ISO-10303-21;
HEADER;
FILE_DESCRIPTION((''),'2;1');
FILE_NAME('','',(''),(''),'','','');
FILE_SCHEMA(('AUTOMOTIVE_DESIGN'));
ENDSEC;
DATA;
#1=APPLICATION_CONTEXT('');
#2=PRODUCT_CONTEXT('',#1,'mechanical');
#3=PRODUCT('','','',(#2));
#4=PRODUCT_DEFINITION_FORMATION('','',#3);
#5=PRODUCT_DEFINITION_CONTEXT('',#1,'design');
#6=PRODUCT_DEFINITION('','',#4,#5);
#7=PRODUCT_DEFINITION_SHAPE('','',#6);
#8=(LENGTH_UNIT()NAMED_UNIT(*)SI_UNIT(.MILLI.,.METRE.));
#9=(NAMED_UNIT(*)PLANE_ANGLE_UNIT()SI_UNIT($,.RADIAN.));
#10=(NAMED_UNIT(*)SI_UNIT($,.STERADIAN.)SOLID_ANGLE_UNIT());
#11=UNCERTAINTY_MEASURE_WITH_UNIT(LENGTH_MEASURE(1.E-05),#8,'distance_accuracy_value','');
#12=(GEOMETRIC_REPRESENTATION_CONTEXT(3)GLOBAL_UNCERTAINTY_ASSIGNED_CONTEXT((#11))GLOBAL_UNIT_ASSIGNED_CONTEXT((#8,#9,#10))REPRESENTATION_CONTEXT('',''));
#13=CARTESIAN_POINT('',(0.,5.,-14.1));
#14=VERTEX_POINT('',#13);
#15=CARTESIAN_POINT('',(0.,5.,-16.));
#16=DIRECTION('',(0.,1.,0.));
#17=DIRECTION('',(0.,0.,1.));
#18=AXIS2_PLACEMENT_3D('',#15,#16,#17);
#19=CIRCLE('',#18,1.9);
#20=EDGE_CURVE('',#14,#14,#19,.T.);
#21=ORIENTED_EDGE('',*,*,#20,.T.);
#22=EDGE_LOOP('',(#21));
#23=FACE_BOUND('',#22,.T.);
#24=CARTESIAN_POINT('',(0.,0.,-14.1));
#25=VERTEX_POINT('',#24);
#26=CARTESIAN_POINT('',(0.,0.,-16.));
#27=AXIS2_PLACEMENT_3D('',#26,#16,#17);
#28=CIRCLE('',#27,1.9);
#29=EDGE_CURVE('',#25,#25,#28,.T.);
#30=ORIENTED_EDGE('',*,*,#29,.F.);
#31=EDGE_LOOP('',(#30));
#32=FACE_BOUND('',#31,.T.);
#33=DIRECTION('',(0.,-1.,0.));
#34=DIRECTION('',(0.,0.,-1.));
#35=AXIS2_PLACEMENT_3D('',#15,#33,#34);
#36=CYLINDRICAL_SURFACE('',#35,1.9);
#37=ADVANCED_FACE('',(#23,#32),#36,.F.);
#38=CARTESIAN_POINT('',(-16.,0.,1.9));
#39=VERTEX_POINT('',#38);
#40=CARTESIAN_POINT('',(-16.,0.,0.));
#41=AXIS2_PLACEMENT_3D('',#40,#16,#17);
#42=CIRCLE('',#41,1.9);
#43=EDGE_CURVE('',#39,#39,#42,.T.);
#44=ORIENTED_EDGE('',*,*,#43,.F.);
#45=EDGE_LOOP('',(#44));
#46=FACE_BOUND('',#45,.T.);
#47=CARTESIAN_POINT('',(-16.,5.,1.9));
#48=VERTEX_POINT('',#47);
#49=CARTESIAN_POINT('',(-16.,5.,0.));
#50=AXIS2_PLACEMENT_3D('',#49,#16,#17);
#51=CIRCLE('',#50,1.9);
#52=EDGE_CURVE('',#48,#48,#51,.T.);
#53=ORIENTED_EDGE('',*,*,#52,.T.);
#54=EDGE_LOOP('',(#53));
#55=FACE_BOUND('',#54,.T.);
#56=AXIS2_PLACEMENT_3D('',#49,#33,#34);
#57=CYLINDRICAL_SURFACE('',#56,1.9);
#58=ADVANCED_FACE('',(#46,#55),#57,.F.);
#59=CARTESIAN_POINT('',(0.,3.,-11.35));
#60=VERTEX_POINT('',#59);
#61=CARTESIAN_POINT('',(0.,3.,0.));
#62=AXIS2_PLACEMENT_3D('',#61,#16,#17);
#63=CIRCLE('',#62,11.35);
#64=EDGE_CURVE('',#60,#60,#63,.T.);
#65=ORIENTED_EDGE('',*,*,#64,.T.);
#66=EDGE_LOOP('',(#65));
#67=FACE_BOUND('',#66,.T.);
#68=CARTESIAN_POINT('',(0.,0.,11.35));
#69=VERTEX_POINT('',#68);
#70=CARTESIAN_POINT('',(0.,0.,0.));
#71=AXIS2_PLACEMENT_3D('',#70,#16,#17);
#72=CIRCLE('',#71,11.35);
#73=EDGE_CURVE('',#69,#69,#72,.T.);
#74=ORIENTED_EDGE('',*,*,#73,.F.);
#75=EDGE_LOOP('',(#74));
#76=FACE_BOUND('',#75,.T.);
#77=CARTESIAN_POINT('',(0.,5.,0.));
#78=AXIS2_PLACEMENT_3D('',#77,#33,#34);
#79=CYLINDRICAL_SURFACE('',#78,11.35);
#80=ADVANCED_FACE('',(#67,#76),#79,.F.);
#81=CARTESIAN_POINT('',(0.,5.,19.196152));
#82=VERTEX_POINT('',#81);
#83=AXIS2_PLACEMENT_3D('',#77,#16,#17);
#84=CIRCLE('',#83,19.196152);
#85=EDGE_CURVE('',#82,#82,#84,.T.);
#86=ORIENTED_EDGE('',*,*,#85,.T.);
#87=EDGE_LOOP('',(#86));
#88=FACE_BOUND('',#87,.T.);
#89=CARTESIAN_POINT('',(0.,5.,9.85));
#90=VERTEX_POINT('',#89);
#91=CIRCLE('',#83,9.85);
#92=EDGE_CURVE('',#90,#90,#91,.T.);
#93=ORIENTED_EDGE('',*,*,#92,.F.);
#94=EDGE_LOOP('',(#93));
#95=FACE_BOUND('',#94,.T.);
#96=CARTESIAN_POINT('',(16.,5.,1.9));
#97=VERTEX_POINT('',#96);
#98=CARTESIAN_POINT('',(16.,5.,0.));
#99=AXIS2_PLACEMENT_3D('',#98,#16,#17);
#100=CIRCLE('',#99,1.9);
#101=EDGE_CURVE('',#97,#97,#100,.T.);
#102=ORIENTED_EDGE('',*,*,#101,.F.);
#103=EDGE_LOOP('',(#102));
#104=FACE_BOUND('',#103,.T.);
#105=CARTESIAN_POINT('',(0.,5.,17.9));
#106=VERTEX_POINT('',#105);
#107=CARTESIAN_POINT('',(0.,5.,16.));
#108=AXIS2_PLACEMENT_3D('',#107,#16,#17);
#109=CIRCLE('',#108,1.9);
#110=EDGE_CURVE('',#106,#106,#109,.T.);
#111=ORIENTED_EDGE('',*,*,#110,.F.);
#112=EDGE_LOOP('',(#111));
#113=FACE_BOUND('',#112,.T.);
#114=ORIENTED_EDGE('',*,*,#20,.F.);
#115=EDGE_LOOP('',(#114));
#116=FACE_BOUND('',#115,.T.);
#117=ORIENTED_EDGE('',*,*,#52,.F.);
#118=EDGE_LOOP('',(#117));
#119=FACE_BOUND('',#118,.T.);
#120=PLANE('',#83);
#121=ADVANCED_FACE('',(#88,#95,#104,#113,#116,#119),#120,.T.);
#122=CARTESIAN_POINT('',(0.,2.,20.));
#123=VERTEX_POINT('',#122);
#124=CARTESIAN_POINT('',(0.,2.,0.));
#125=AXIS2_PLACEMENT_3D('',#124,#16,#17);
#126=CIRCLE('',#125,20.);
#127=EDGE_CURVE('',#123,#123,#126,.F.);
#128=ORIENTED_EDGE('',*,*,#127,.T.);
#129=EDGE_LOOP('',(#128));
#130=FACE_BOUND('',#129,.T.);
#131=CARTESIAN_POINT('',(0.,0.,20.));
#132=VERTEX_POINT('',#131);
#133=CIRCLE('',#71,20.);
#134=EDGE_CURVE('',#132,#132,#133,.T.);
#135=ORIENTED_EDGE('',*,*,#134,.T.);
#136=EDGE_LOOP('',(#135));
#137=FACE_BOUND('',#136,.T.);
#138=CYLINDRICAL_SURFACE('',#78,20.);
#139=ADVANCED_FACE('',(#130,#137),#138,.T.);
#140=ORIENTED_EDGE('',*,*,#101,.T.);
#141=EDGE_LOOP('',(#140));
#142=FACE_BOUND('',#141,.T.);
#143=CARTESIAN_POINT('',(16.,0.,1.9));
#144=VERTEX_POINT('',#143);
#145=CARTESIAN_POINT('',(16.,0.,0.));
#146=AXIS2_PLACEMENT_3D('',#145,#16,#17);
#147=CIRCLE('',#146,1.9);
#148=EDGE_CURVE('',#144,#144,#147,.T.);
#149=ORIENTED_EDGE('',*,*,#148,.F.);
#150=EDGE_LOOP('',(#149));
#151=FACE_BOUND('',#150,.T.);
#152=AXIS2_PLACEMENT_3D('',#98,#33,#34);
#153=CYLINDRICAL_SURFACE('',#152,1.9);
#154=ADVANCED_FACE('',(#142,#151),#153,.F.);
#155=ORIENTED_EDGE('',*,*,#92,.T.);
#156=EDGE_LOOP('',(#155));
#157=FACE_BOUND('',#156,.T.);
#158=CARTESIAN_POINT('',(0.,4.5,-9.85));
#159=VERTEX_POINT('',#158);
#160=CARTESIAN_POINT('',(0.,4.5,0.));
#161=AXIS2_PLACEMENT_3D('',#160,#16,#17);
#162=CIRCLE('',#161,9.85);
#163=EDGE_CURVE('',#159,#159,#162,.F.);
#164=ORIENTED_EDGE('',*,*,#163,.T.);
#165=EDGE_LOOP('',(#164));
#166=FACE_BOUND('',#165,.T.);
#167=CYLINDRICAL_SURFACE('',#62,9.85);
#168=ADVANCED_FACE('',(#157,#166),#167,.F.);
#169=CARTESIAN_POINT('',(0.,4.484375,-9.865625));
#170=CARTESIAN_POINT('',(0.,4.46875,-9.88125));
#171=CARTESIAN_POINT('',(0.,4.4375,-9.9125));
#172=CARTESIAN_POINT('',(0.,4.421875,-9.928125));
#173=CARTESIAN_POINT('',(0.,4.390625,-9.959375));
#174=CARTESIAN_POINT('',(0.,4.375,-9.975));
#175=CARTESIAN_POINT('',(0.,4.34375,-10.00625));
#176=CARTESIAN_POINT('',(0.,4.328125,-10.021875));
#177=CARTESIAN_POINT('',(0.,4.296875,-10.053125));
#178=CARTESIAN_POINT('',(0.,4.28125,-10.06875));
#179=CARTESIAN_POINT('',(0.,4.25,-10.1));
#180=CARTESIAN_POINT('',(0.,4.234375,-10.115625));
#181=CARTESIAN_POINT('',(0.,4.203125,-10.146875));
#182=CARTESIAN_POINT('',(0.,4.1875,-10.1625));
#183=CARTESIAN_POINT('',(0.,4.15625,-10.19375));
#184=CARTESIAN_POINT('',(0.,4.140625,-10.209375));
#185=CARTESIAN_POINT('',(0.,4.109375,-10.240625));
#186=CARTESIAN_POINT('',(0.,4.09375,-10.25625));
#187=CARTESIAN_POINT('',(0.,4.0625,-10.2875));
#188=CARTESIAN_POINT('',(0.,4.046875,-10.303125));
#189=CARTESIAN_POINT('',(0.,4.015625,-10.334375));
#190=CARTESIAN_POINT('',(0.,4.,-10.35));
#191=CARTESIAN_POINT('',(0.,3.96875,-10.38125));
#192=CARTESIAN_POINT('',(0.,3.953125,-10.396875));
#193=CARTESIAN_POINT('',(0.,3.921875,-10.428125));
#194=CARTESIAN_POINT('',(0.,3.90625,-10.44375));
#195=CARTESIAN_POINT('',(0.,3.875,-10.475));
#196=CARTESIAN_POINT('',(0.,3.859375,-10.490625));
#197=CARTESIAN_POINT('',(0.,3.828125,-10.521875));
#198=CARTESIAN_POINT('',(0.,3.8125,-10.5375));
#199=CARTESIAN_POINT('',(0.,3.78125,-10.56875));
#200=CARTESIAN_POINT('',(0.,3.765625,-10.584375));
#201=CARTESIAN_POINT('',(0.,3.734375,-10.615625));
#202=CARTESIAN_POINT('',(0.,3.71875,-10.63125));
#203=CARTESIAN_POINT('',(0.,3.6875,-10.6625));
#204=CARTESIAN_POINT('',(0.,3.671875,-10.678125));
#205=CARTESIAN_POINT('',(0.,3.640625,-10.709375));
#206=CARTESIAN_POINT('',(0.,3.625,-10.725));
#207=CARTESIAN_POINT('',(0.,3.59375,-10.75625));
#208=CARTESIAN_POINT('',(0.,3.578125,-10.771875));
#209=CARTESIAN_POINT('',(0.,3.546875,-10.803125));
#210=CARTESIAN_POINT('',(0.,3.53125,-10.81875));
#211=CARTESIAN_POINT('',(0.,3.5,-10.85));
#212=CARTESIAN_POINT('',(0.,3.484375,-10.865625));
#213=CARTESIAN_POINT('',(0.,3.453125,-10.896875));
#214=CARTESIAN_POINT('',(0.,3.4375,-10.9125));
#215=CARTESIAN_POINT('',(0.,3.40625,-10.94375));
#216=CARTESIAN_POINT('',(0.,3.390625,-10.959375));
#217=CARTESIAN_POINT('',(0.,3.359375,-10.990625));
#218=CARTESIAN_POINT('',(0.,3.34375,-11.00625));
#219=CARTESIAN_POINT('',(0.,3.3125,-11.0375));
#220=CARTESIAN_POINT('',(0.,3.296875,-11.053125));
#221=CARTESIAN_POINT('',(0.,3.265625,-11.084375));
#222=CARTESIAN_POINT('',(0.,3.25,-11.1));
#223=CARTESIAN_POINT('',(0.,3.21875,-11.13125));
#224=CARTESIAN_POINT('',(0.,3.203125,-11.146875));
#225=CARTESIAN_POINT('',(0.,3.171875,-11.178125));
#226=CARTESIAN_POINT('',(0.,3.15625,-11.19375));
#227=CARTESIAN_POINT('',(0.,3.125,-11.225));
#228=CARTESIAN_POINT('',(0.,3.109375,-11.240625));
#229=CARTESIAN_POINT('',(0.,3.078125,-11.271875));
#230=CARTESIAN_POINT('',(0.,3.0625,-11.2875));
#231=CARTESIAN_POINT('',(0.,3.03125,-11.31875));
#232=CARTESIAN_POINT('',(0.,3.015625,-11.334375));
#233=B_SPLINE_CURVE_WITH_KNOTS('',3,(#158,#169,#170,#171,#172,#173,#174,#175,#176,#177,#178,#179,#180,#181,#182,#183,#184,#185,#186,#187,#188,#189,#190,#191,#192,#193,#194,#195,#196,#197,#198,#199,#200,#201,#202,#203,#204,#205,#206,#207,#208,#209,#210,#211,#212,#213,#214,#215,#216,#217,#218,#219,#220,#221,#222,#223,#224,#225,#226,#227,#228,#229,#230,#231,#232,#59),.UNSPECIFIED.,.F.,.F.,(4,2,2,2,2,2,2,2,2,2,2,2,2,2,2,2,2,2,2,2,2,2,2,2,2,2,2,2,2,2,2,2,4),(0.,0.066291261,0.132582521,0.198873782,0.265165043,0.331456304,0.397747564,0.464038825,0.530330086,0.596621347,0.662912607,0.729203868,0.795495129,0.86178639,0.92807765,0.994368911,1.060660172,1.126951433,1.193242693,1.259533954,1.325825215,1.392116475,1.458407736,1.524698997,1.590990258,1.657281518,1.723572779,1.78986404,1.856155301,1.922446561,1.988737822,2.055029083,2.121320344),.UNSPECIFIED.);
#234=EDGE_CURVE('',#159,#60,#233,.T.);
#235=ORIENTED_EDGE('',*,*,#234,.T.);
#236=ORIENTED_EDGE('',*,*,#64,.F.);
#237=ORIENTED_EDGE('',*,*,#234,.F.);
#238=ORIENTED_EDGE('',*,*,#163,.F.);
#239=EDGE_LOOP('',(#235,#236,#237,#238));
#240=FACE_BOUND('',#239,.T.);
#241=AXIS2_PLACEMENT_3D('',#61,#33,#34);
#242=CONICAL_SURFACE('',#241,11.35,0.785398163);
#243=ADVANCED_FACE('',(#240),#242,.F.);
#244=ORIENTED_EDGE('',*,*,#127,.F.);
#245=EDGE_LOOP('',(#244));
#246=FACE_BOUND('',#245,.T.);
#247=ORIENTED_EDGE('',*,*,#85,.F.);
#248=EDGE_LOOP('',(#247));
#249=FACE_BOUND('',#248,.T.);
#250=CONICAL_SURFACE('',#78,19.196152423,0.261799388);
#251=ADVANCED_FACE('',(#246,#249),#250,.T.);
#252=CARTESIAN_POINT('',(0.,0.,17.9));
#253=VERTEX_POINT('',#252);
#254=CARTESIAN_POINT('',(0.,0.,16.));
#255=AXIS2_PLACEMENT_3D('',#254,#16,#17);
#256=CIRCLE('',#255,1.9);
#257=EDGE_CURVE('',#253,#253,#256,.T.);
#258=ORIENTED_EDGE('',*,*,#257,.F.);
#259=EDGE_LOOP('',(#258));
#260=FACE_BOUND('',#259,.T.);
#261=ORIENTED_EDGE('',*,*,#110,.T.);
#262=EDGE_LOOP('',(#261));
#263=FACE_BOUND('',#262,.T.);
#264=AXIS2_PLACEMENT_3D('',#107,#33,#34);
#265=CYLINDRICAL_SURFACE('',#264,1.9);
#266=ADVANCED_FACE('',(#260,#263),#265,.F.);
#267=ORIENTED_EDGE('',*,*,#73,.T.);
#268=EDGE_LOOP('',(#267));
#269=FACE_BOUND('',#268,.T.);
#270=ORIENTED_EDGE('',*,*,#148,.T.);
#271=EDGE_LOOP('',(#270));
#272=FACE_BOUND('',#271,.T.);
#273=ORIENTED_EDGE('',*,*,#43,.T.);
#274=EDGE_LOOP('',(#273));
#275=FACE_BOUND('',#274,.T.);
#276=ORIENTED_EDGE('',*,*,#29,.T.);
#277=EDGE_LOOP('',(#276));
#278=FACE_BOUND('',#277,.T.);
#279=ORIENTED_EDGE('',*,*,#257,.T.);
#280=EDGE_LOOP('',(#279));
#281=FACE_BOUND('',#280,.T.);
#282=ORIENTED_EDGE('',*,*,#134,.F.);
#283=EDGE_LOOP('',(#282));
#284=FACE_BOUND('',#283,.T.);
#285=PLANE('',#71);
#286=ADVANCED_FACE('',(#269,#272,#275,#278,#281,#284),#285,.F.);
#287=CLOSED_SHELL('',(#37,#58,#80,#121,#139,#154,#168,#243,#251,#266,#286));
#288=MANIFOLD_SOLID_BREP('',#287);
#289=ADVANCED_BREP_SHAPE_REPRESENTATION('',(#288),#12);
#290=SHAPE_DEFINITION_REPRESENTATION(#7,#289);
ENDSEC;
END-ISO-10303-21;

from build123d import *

# Parameters (mm, degrees)
SKETCH1_R           = 20
SKETCH1_R_2         = 11.35
SKETCH1_R_3         = 1.9
BOSS_EXTRUDE1_DEPTH = 5
CHAMFER1_SIZE       = 3
CHAMFER1_SIZE2      = 0.803847577
BOSS_EXTRUDE2_START = -2
SKETCH2_R           = 11.35
SKETCH2_R_2         = 9.85
BOSS_EXTRUDE2_DEPTH = 2
CHAMFER2_SIZE       = 1.5


with BuildPart() as part:
    # Sketch1 → Boss-Extrude1 (new body)
    with BuildSketch(Plane(origin=(0, 0, 0), x_dir=(1, 0, 0), z_dir=(0, 1, 0))):
        with Locations(Location((0, 0, 0), (0, 0, 270))):
            Circle(SKETCH1_R)
        with Locations(Location((0, 0, 0), (0, 0, 270))):
            Circle(SKETCH1_R_2, mode=Mode.SUBTRACT)
        with Locations(Location((0, 16, 0), (0, 0, 270))):
            Circle(SKETCH1_R_3, mode=Mode.SUBTRACT)
        with Locations(Location((16, 0, 0), (0, 0, 270))):
            Circle(SKETCH1_R_3, mode=Mode.SUBTRACT)
        with Locations(Location((0, -16, 0), (0, 0, 270))):
            Circle(SKETCH1_R_3, mode=Mode.SUBTRACT)
        with Locations(Location((-16, 0, 0), (0, 0, 270))):
            Circle(SKETCH1_R_3, mode=Mode.SUBTRACT)
    extrude(amount=BOSS_EXTRUDE1_DEPTH)

    # Chamfer1
    chamfer1_edges = [part.edges().sort_by_distance(p)[0] for p in [
        (0, 5, -20),
    ]]
    chamfer1_side = [part.faces().sort_by_distance(p)[0] for p in [
        (0, 2.5, -20),
    ]]
    chamfer(chamfer1_edges, length=CHAMFER1_SIZE, length2=CHAMFER1_SIZE2, reference=chamfer1_side[0])

    # Sketch2 → Boss-Extrude2 (add)
    with BuildSketch(Plane(origin=(0, 5, 0), x_dir=(1, 0, 0), z_dir=(0, 1, 0)).offset(BOSS_EXTRUDE2_START)):
        with Locations(Location((0, 0, 0), (0, 0, 270))):
            Circle(SKETCH2_R)
        with Locations(Location((0, 0, 0), (0, 0, 270))):
            Circle(SKETCH2_R_2, mode=Mode.SUBTRACT)
    extrude(amount=BOSS_EXTRUDE2_DEPTH)

    # Chamfer2
    chamfer2_edges = [part.edges().sort_by_distance(p)[0] for p in [
        (0, 3, -9.85),
    ]]
    chamfer(chamfer2_edges, length=CHAMFER2_SIZE - 0.0001)  # a hair under: the kernel refuses the full size


solid = part.part
